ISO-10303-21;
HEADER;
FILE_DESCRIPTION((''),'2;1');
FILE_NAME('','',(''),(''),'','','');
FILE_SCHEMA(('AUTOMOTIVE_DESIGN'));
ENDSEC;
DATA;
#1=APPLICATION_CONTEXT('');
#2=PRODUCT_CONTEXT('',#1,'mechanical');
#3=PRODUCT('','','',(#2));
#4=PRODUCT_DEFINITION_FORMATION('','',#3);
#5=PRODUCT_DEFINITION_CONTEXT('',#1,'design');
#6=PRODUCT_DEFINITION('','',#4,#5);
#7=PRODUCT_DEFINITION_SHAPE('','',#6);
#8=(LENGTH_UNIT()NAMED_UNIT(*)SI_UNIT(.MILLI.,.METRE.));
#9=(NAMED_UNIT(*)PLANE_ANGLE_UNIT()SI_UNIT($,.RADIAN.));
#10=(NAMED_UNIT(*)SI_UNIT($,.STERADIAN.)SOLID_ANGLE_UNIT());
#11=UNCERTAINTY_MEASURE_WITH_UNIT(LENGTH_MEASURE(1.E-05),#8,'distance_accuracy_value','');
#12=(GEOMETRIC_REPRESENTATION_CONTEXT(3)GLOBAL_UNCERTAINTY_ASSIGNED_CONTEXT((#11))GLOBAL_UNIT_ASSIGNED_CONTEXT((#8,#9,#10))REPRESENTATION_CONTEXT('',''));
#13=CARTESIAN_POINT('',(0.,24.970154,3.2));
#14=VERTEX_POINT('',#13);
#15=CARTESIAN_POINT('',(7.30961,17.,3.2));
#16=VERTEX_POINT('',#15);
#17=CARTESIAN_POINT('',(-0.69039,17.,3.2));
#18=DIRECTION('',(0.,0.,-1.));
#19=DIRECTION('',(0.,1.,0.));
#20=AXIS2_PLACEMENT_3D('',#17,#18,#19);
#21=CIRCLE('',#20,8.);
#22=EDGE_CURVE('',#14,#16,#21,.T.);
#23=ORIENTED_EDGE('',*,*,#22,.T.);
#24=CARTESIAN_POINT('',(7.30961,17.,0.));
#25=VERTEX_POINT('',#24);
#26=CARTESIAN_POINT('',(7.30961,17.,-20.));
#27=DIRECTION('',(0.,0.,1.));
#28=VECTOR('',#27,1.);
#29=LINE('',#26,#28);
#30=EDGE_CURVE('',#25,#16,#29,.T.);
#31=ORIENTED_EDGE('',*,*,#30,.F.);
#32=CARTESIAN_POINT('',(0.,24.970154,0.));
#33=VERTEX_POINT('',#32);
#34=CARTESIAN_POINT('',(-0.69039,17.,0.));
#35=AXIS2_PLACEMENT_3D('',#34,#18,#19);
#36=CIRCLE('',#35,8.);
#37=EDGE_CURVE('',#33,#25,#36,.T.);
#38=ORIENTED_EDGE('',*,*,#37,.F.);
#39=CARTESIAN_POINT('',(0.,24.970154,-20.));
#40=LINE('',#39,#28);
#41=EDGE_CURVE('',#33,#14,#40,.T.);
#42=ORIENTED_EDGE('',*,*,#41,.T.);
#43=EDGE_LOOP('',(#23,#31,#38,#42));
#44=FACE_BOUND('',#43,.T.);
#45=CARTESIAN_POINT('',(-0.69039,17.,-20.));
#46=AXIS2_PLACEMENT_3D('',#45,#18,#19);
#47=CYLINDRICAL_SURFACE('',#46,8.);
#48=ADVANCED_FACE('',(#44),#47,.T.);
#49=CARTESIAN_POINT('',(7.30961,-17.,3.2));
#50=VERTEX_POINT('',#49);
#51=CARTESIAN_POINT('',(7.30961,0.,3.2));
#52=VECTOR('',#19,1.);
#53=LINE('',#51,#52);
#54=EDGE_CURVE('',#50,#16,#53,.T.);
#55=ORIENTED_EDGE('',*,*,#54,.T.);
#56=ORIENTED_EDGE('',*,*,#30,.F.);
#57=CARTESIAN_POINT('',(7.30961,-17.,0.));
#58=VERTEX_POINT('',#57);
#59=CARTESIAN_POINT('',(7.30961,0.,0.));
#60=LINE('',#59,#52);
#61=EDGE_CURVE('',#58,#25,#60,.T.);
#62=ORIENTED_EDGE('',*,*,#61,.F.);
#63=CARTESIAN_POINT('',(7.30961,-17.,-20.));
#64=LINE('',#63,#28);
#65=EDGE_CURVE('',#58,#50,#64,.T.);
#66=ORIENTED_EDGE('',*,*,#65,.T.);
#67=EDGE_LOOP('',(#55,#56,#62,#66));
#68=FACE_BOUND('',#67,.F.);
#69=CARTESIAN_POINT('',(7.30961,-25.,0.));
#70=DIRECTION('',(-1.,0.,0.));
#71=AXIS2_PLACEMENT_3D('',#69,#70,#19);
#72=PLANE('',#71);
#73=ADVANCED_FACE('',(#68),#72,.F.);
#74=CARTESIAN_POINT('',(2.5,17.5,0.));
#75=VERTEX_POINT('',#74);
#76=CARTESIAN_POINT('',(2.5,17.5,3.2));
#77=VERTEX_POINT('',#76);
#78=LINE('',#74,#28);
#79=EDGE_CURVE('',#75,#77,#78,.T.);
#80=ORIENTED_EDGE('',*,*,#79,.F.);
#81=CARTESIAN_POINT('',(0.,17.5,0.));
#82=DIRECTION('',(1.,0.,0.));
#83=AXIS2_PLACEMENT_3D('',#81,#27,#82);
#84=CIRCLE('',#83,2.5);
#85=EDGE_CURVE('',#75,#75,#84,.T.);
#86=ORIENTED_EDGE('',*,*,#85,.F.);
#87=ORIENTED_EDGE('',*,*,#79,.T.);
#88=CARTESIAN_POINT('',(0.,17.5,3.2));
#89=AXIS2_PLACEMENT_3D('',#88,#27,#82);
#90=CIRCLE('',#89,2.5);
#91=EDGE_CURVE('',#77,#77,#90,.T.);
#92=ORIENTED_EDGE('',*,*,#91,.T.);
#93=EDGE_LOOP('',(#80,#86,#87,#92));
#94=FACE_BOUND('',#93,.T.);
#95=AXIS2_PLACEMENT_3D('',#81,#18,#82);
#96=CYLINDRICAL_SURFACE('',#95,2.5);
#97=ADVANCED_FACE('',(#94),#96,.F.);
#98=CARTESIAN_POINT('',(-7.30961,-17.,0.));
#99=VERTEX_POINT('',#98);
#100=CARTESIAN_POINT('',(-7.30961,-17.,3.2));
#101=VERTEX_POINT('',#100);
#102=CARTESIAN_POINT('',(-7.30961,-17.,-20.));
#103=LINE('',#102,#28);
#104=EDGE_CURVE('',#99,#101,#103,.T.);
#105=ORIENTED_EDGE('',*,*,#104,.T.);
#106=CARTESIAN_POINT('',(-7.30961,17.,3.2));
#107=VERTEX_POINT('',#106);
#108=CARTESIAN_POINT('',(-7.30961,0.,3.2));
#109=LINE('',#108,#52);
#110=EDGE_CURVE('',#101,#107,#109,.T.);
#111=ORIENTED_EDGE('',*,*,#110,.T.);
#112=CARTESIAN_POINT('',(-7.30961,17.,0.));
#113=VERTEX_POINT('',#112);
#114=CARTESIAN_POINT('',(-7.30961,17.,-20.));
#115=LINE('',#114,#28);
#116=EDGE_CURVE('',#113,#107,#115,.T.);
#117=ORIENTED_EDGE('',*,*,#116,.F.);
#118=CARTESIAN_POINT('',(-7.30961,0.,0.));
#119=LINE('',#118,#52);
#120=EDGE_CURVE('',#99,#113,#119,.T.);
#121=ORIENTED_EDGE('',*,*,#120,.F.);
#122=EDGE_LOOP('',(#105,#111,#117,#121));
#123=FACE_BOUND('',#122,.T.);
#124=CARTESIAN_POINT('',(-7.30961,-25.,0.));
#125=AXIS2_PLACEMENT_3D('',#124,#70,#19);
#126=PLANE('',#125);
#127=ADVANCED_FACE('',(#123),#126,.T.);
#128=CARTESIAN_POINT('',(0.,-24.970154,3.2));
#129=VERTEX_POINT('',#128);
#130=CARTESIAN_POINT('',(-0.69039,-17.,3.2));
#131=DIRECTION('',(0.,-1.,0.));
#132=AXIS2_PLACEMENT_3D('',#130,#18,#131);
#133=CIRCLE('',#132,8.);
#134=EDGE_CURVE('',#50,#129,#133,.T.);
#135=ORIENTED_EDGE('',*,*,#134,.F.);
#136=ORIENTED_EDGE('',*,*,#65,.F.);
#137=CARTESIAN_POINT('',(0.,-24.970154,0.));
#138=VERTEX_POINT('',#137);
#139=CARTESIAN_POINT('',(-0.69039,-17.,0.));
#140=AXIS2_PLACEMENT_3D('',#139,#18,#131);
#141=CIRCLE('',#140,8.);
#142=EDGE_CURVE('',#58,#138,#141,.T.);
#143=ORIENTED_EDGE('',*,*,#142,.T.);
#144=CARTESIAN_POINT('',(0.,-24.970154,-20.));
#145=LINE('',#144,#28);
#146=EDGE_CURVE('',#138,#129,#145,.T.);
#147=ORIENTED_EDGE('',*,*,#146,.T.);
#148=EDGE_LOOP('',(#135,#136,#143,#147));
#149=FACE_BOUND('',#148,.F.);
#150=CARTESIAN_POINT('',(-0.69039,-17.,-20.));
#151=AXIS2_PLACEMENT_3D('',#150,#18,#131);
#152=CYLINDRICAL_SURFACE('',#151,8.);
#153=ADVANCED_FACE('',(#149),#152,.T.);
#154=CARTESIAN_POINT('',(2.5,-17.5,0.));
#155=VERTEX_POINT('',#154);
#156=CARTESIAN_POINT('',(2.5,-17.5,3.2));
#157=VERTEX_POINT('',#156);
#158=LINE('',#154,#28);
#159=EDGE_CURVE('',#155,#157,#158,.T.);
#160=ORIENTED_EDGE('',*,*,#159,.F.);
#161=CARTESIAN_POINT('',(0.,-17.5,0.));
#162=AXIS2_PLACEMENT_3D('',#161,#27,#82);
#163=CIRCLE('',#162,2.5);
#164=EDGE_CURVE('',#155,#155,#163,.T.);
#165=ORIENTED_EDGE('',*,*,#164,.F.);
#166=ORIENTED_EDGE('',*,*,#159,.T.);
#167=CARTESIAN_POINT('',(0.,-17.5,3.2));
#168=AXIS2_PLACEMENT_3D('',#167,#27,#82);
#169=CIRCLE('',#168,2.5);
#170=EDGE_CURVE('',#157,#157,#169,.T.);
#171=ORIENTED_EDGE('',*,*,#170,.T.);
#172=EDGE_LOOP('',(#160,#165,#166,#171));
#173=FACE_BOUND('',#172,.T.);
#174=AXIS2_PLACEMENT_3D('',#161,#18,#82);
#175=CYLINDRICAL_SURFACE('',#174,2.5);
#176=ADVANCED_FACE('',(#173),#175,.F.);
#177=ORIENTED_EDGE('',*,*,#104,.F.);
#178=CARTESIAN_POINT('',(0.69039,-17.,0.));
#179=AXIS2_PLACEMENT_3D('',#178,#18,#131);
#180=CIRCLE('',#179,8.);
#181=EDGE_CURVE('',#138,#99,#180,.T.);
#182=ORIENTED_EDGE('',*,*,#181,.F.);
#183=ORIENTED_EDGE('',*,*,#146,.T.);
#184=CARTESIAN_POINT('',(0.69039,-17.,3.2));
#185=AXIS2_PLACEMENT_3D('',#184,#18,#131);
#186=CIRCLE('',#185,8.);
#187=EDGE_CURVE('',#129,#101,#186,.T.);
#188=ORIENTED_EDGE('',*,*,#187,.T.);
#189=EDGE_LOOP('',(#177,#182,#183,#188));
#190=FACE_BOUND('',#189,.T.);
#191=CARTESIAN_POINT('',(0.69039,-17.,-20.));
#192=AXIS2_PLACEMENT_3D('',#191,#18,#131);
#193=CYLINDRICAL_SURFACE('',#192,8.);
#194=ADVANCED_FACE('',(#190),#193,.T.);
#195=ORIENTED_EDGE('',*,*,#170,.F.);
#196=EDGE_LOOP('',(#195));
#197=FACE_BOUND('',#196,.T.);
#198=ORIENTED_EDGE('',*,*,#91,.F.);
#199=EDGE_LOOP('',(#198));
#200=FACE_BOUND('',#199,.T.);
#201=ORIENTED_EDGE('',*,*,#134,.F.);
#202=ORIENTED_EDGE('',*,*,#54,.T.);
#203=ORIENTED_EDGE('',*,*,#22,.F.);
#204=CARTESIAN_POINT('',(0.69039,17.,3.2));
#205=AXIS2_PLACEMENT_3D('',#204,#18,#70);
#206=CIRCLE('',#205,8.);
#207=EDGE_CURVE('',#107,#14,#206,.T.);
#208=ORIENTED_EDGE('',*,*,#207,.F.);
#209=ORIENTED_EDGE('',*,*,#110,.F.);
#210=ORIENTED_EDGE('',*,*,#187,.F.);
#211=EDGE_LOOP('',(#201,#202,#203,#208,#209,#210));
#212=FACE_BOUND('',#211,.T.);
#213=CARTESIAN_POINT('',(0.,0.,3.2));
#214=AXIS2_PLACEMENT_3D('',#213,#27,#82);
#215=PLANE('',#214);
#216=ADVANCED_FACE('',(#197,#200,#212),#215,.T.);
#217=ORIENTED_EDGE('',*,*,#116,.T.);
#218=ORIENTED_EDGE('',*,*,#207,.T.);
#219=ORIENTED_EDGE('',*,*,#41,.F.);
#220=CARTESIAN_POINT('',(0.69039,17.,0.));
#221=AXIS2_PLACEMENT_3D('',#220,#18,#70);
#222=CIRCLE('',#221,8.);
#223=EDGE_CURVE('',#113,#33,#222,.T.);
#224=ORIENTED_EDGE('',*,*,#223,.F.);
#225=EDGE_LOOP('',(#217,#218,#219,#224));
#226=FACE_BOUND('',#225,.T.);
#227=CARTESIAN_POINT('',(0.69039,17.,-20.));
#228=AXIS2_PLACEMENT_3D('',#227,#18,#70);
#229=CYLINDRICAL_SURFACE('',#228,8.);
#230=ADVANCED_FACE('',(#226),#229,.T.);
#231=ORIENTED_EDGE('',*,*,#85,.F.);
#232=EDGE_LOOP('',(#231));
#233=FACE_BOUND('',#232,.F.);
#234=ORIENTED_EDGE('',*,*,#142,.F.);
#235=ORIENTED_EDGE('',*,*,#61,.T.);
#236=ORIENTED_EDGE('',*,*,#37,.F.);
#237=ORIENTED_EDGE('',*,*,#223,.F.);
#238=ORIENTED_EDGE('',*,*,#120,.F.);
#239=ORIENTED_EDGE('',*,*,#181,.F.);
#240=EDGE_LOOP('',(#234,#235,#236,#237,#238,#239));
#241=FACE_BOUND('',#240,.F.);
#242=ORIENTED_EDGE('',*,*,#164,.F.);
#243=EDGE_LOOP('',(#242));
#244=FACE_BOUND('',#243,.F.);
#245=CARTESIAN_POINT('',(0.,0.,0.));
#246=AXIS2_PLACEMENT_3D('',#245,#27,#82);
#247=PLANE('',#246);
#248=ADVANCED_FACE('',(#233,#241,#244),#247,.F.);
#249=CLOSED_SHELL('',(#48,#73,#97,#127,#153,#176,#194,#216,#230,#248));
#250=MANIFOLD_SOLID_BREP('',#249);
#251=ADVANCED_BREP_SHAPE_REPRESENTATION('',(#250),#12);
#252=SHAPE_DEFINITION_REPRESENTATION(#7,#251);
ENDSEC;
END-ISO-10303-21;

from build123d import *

# Parameters (mm, degrees)
F0_W        = 14.6192193359
F0_H        = 50
F0_R        = 2.5
F1_DEPTH    = 3.2
F2_T1_DEPTH = 43.2
F3_T1_DEPTH = 43.2


# Not quite as in the source:
# - a fillet or chamfer that OpenCascade refuses, or shapes differently, is made with other operations: its cross-section is extruded or revolved along the edge and cut away or added


with BuildPart() as f1:
    # F0 (on Top) → F1 (new body)
    with BuildSketch(Plane.XY):
        Rectangle(F0_W, F0_H)
        with Locations((0, -17.5)):
            Circle(F0_R, mode=Mode.SUBTRACT)
        with Locations((0, 17.5)):
            Circle(F0_R, mode=Mode.SUBTRACT)
    extrude(amount=F1_DEPTH)

    # F2: fillet of radius 8 on 2 edges, made by hand

    # F2_s2 → F2_t1 (cut)
    with BuildSketch(Plane.XY.offset(-20)):
        with BuildLine():
            ThreePointArc((-0.6903903321, -25), (4.9664639174, -22.6568542495), (7.3096096679, -17))
            Line((7.3096096679, -17), (7.3096096679, -25))
            Line((7.3096096679, -25), (-0.6903903321, -25))
        make_face()
        with BuildLine():
            ThreePointArc((0.6903903321, -25), (-4.9664639174, -22.6568542495), (-7.3096096679, -17))
            Line((-7.3096096679, -17), (-7.3096096679, -25))
            Line((-7.3096096679, -25), (0.6903903321, -25))
        make_face()
    extrude(amount=F2_T1_DEPTH, mode=Mode.SUBTRACT)

    # F3: fillet of radius 8 on 2 edges, made by hand

    # F3_s2 → F3_t1 (cut)
    with BuildSketch(Plane.XY.offset(-20)):
        with BuildLine():
            ThreePointArc((-0.6903903321, 25), (4.9664639174, 22.6568542495), (7.3096096679, 17))
            Line((7.3096096679, 17), (7.3096096679, 25))
            Line((7.3096096679, 25), (-0.6903903321, 25))
        make_face()
        with BuildLine():
            ThreePointArc((-7.3096096679, 17), (-4.9664639174, 22.6568542495), (0.6903903321, 25))
            Line((0.6903903321, 25), (-7.3096096679, 25))
            Line((-7.3096096679, 25), (-7.3096096679, 17))
        make_face()
    extrude(amount=F3_T1_DEPTH, mode=Mode.SUBTRACT)


solid = f1.part
